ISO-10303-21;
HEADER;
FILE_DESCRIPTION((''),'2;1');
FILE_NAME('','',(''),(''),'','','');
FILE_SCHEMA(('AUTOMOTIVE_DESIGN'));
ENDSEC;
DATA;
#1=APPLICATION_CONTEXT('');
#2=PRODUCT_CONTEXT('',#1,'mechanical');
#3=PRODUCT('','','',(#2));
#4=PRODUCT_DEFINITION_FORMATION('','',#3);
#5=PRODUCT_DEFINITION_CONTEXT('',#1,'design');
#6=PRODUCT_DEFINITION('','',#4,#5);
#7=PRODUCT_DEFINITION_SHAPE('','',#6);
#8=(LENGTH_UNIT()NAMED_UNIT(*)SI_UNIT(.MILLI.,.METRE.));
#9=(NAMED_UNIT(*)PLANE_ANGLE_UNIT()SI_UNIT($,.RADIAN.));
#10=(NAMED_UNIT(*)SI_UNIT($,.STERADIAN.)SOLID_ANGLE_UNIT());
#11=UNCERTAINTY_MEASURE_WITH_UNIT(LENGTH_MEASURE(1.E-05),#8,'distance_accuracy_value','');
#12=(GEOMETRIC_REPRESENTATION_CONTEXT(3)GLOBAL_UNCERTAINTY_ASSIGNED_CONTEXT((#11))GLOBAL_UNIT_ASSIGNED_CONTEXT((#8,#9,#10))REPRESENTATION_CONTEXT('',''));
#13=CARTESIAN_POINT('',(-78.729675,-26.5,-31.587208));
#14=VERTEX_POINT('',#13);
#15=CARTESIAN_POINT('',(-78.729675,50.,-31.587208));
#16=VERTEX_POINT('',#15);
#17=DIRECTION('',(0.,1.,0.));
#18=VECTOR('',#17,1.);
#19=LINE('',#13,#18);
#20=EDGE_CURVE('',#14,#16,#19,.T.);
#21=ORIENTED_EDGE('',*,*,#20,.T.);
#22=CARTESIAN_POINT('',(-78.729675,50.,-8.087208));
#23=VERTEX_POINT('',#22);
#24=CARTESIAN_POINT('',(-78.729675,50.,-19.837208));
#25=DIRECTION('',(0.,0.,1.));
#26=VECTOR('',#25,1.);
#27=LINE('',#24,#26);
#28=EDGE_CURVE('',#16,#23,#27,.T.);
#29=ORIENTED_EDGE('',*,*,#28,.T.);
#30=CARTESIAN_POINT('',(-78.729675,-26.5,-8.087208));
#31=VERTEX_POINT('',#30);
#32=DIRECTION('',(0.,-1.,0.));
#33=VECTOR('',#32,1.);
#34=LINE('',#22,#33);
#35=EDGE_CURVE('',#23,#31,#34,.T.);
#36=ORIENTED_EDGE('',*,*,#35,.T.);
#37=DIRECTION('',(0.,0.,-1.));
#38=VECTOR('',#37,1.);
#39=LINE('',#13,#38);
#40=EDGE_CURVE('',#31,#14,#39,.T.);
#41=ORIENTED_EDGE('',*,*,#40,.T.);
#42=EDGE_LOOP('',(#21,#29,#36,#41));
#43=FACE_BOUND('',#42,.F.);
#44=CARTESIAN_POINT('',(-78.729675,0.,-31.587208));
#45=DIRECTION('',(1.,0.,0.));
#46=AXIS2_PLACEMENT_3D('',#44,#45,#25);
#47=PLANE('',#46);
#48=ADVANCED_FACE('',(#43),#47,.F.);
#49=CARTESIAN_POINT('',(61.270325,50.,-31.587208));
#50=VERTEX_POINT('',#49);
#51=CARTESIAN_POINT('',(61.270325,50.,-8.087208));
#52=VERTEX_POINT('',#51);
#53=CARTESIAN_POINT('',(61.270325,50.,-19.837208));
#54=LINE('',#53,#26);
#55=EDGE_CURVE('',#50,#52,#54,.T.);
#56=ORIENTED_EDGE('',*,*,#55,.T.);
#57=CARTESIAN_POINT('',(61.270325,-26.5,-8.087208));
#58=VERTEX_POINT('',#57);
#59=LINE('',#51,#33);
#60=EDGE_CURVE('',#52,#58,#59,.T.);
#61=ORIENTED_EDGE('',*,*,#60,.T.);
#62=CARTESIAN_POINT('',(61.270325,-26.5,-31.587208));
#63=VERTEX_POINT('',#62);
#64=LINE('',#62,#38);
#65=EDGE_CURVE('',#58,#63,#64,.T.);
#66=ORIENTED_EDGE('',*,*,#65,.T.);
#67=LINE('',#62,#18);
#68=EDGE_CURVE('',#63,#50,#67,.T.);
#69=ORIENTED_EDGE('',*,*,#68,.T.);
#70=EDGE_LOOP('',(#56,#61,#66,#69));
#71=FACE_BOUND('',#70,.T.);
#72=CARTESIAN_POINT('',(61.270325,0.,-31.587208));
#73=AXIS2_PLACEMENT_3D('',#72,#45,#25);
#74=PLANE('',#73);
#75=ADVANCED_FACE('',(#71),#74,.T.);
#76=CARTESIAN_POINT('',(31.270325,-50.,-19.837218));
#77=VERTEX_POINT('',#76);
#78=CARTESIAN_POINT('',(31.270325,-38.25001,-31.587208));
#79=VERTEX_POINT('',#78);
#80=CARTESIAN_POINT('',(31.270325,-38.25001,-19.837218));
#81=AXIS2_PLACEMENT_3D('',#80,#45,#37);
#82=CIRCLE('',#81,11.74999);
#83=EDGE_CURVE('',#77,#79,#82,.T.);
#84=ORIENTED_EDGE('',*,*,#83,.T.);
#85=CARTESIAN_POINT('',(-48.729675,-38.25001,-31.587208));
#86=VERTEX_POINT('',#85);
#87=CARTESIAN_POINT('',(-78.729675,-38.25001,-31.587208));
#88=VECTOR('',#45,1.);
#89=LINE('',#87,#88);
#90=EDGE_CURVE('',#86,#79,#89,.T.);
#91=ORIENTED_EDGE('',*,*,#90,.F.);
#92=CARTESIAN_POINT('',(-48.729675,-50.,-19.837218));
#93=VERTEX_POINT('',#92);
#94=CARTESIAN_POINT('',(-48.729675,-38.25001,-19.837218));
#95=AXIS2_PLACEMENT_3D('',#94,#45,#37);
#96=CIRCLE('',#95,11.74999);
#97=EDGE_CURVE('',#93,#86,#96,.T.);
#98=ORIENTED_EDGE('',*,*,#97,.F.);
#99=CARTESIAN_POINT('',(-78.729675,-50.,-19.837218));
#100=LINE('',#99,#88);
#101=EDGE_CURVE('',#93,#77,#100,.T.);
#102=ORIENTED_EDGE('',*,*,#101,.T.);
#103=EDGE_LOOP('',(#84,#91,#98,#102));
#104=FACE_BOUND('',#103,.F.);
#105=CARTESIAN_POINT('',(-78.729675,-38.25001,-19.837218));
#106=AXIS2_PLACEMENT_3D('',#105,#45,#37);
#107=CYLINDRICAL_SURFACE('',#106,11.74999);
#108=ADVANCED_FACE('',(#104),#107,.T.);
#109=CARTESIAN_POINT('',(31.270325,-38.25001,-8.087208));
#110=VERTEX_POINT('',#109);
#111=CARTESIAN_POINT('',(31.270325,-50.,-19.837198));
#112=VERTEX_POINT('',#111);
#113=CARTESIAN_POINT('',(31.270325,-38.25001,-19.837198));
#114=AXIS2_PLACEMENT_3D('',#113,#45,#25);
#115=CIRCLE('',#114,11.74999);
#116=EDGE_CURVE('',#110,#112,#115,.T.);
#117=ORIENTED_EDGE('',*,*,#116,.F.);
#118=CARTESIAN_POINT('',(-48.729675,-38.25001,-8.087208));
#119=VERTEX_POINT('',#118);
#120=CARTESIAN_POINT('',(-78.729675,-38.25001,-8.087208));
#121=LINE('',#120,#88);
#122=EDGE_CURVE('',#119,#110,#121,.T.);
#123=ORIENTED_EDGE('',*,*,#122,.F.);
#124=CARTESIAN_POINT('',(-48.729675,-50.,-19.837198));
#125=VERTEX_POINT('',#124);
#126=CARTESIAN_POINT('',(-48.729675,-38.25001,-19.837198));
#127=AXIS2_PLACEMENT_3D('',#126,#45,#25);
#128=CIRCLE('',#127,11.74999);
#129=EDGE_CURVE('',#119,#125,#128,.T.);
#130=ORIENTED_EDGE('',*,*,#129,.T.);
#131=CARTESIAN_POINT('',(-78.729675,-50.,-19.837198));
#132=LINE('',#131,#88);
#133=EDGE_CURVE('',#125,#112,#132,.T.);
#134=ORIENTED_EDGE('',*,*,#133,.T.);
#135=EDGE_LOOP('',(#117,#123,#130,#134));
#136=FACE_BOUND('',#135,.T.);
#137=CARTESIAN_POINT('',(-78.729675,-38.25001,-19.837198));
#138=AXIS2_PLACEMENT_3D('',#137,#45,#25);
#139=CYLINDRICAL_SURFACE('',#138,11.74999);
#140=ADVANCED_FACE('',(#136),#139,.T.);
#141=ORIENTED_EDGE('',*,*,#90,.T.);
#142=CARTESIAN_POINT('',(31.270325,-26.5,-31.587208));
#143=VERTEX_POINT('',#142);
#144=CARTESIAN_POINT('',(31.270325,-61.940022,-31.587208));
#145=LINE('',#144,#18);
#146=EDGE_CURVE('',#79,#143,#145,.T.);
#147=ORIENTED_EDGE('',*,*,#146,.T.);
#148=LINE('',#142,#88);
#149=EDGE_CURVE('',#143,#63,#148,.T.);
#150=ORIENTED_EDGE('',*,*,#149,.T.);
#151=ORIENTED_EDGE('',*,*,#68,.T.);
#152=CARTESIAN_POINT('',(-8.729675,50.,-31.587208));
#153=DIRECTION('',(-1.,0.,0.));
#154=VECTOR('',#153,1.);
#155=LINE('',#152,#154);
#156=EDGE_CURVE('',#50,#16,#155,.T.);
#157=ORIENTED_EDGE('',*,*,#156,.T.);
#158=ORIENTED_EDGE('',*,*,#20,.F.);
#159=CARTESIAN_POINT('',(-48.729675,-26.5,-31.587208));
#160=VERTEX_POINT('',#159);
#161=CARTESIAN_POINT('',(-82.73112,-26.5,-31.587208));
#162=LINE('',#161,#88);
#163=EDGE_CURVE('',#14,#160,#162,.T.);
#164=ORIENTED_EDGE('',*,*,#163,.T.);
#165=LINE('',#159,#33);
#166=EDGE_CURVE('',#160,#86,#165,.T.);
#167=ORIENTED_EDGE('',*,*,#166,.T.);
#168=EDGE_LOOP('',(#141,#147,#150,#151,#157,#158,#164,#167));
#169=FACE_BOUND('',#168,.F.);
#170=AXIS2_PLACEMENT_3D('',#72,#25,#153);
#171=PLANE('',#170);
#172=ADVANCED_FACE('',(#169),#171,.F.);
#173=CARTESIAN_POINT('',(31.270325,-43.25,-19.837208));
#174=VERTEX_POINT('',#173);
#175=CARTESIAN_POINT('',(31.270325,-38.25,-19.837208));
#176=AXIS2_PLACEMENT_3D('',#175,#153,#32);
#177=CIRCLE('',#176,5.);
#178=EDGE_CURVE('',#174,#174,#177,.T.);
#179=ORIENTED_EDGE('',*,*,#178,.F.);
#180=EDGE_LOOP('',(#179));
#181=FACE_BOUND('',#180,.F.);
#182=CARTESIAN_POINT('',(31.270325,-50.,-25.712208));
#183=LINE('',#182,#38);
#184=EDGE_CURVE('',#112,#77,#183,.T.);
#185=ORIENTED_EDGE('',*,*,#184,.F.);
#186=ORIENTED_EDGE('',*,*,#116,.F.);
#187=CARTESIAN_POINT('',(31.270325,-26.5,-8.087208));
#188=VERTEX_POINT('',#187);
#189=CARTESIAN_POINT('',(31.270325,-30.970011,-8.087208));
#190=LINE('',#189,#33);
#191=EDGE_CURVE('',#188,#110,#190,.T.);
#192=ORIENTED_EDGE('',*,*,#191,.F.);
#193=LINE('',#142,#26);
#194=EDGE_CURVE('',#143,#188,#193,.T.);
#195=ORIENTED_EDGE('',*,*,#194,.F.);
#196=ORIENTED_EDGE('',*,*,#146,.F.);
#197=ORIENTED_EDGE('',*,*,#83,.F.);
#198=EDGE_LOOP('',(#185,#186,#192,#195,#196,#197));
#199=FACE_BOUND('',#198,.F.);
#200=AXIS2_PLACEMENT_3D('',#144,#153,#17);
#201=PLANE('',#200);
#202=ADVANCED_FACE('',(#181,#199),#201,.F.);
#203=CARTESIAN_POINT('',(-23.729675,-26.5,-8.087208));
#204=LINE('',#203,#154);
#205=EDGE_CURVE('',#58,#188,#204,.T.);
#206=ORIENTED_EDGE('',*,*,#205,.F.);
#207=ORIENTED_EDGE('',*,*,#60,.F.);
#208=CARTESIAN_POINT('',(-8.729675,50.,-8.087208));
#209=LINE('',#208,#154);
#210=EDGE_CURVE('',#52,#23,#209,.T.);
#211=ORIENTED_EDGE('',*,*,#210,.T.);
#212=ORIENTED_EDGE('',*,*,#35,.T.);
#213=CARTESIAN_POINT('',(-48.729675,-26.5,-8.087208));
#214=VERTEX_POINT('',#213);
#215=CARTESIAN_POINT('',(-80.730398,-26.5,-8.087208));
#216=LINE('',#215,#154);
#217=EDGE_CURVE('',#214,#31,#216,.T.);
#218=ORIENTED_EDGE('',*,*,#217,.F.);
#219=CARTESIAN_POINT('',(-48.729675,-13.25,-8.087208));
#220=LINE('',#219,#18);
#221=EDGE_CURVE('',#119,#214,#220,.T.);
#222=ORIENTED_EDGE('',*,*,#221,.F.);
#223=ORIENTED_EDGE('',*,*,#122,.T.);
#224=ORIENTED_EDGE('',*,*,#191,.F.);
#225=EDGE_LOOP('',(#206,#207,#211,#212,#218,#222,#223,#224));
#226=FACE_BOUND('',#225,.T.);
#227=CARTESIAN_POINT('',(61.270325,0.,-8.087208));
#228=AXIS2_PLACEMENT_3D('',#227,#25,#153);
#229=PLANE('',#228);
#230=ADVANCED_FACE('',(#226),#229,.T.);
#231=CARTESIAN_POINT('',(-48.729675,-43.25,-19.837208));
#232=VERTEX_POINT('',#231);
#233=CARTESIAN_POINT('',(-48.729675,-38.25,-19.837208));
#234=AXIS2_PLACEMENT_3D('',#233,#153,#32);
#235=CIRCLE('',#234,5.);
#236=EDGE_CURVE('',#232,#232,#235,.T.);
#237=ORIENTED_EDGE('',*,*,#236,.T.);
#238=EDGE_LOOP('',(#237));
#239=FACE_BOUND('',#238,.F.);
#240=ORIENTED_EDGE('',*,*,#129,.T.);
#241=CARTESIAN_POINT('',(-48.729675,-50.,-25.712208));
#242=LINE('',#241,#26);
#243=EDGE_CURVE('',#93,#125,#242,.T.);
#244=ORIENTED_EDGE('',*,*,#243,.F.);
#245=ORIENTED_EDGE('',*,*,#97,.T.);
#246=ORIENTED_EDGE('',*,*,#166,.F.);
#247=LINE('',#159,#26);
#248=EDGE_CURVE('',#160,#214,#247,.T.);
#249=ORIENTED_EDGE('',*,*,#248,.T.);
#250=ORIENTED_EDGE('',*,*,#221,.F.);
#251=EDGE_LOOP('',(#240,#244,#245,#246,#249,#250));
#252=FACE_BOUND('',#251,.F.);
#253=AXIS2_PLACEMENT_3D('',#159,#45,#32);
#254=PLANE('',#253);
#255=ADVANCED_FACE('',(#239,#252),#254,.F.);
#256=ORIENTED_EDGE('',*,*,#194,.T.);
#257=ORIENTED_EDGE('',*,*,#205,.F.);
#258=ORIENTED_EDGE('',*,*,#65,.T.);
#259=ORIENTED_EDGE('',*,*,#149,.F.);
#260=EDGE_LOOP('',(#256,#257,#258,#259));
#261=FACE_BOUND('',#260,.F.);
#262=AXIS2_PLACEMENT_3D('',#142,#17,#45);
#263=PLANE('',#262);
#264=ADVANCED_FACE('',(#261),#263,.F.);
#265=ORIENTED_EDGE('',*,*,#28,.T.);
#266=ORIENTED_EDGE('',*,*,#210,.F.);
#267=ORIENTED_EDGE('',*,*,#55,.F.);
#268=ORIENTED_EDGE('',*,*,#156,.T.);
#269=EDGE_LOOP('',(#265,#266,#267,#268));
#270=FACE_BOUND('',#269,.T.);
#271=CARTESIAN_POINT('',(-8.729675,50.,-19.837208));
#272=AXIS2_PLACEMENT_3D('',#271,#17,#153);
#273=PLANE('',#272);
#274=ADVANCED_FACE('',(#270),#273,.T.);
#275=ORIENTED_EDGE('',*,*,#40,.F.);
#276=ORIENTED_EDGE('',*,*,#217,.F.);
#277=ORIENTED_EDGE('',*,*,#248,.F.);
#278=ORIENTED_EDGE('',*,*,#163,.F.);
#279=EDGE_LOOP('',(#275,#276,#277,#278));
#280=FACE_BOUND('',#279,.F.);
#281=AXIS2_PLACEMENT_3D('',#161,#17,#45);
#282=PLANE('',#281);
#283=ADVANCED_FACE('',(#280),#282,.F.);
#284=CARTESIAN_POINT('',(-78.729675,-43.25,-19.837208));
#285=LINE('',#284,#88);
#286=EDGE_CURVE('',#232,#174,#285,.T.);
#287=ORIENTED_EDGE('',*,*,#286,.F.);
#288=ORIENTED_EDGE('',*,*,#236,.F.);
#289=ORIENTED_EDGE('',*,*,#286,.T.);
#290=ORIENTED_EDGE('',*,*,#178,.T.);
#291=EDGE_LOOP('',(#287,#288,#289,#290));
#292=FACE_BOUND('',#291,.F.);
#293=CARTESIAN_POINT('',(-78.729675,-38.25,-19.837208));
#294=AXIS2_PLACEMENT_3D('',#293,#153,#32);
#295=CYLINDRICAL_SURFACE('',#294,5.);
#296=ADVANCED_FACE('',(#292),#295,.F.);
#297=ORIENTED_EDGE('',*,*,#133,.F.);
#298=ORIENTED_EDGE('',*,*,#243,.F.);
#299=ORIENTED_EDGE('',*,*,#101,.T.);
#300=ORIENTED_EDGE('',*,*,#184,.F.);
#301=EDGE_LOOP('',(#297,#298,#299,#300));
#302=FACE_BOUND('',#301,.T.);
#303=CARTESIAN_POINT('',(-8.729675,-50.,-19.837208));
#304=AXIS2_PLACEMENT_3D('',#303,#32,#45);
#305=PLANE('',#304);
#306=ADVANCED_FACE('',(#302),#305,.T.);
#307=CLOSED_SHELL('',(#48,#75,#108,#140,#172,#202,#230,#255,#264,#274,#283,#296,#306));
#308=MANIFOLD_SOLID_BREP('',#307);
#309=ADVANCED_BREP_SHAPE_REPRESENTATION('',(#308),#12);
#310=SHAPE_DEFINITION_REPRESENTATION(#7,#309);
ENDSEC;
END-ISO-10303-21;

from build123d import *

# Parameters (mm, degrees)
F0_W     = 140
F0_H     = 23.5
F1_DEPTH = 50
F2_R     = 11.74999
F3_R     = 5
F4_DEPTH = 140
F6_DEPTH = 25
F7_W     = 140
F7_H     = 23.5
F8_DEPTH = 50


# Not quite as in the source:
# - a fillet or chamfer is up to 0.001 mm smaller than in the source, because OpenCascade refuses the exact size


with BuildPart() as f1:
    # F0 (on Front) → F1 (new body)
    with BuildSketch(Plane.XZ):
        with Locations((-8.7296748534, -19.8372076215)):
            Rectangle(F0_W, F0_H)
    extrude(amount=F1_DEPTH)

    # F2 (radius 11.75 in the source; OpenCascade refuses exactly that, so slightly less here)
    f2_edges = [f1.edges().sort_by_distance(p)[0] for p in [
        (-8.729675, -50, -8.087208),
        (-8.729675, -50, -31.587208),
    ]]
    fillet(f2_edges, radius=F2_R)

    # F3 (on face) → F4 (cut, through all)
    with BuildSketch(Plane(origin=(-78.7296748534, 0, 0), x_dir=(0, -1, 0), z_dir=(-1, 0, 0))):
        with Locations((38.25, -19.8372076215)):
            Circle(F3_R)
    extrude(amount=-F4_DEPTH, mode=Mode.SUBTRACT)

    # F5 (on face) → F6 (cut)
    with BuildSketch(Plane(origin=(0, 0, -31.5872076215), x_dir=(1, 0, 0), z_dir=(0, 0, -1))):
        Polygon((-48.7296748534, 26.5), (-48.7296748534, 51.5), (-48.7296748534, 66.3150921464), (-82.7311202884, 66.3150921464), (-82.7311202884, 26.5), (-78.7296748534, 26.5), align=None)
        Polygon((31.2703251466, 61.9400218129), (31.2703251466, 51.5), (31.2703251466, 26.5), (74.6265202761, 26.5), (74.6265202761, 61.9400218129), align=None)
    extrude(amount=-F6_DEPTH, mode=Mode.SUBTRACT)

    # F7 (on face) → F8 (join)
    with BuildSketch(Plane(origin=(0, 0, 0), x_dir=(-1, 0, 0), z_dir=(0, 1, 0))):
        with Locations((8.7296748534, -19.8372076215)):
            Rectangle(F7_W, F7_H)
    extrude(amount=F8_DEPTH)


solid = f1.part
